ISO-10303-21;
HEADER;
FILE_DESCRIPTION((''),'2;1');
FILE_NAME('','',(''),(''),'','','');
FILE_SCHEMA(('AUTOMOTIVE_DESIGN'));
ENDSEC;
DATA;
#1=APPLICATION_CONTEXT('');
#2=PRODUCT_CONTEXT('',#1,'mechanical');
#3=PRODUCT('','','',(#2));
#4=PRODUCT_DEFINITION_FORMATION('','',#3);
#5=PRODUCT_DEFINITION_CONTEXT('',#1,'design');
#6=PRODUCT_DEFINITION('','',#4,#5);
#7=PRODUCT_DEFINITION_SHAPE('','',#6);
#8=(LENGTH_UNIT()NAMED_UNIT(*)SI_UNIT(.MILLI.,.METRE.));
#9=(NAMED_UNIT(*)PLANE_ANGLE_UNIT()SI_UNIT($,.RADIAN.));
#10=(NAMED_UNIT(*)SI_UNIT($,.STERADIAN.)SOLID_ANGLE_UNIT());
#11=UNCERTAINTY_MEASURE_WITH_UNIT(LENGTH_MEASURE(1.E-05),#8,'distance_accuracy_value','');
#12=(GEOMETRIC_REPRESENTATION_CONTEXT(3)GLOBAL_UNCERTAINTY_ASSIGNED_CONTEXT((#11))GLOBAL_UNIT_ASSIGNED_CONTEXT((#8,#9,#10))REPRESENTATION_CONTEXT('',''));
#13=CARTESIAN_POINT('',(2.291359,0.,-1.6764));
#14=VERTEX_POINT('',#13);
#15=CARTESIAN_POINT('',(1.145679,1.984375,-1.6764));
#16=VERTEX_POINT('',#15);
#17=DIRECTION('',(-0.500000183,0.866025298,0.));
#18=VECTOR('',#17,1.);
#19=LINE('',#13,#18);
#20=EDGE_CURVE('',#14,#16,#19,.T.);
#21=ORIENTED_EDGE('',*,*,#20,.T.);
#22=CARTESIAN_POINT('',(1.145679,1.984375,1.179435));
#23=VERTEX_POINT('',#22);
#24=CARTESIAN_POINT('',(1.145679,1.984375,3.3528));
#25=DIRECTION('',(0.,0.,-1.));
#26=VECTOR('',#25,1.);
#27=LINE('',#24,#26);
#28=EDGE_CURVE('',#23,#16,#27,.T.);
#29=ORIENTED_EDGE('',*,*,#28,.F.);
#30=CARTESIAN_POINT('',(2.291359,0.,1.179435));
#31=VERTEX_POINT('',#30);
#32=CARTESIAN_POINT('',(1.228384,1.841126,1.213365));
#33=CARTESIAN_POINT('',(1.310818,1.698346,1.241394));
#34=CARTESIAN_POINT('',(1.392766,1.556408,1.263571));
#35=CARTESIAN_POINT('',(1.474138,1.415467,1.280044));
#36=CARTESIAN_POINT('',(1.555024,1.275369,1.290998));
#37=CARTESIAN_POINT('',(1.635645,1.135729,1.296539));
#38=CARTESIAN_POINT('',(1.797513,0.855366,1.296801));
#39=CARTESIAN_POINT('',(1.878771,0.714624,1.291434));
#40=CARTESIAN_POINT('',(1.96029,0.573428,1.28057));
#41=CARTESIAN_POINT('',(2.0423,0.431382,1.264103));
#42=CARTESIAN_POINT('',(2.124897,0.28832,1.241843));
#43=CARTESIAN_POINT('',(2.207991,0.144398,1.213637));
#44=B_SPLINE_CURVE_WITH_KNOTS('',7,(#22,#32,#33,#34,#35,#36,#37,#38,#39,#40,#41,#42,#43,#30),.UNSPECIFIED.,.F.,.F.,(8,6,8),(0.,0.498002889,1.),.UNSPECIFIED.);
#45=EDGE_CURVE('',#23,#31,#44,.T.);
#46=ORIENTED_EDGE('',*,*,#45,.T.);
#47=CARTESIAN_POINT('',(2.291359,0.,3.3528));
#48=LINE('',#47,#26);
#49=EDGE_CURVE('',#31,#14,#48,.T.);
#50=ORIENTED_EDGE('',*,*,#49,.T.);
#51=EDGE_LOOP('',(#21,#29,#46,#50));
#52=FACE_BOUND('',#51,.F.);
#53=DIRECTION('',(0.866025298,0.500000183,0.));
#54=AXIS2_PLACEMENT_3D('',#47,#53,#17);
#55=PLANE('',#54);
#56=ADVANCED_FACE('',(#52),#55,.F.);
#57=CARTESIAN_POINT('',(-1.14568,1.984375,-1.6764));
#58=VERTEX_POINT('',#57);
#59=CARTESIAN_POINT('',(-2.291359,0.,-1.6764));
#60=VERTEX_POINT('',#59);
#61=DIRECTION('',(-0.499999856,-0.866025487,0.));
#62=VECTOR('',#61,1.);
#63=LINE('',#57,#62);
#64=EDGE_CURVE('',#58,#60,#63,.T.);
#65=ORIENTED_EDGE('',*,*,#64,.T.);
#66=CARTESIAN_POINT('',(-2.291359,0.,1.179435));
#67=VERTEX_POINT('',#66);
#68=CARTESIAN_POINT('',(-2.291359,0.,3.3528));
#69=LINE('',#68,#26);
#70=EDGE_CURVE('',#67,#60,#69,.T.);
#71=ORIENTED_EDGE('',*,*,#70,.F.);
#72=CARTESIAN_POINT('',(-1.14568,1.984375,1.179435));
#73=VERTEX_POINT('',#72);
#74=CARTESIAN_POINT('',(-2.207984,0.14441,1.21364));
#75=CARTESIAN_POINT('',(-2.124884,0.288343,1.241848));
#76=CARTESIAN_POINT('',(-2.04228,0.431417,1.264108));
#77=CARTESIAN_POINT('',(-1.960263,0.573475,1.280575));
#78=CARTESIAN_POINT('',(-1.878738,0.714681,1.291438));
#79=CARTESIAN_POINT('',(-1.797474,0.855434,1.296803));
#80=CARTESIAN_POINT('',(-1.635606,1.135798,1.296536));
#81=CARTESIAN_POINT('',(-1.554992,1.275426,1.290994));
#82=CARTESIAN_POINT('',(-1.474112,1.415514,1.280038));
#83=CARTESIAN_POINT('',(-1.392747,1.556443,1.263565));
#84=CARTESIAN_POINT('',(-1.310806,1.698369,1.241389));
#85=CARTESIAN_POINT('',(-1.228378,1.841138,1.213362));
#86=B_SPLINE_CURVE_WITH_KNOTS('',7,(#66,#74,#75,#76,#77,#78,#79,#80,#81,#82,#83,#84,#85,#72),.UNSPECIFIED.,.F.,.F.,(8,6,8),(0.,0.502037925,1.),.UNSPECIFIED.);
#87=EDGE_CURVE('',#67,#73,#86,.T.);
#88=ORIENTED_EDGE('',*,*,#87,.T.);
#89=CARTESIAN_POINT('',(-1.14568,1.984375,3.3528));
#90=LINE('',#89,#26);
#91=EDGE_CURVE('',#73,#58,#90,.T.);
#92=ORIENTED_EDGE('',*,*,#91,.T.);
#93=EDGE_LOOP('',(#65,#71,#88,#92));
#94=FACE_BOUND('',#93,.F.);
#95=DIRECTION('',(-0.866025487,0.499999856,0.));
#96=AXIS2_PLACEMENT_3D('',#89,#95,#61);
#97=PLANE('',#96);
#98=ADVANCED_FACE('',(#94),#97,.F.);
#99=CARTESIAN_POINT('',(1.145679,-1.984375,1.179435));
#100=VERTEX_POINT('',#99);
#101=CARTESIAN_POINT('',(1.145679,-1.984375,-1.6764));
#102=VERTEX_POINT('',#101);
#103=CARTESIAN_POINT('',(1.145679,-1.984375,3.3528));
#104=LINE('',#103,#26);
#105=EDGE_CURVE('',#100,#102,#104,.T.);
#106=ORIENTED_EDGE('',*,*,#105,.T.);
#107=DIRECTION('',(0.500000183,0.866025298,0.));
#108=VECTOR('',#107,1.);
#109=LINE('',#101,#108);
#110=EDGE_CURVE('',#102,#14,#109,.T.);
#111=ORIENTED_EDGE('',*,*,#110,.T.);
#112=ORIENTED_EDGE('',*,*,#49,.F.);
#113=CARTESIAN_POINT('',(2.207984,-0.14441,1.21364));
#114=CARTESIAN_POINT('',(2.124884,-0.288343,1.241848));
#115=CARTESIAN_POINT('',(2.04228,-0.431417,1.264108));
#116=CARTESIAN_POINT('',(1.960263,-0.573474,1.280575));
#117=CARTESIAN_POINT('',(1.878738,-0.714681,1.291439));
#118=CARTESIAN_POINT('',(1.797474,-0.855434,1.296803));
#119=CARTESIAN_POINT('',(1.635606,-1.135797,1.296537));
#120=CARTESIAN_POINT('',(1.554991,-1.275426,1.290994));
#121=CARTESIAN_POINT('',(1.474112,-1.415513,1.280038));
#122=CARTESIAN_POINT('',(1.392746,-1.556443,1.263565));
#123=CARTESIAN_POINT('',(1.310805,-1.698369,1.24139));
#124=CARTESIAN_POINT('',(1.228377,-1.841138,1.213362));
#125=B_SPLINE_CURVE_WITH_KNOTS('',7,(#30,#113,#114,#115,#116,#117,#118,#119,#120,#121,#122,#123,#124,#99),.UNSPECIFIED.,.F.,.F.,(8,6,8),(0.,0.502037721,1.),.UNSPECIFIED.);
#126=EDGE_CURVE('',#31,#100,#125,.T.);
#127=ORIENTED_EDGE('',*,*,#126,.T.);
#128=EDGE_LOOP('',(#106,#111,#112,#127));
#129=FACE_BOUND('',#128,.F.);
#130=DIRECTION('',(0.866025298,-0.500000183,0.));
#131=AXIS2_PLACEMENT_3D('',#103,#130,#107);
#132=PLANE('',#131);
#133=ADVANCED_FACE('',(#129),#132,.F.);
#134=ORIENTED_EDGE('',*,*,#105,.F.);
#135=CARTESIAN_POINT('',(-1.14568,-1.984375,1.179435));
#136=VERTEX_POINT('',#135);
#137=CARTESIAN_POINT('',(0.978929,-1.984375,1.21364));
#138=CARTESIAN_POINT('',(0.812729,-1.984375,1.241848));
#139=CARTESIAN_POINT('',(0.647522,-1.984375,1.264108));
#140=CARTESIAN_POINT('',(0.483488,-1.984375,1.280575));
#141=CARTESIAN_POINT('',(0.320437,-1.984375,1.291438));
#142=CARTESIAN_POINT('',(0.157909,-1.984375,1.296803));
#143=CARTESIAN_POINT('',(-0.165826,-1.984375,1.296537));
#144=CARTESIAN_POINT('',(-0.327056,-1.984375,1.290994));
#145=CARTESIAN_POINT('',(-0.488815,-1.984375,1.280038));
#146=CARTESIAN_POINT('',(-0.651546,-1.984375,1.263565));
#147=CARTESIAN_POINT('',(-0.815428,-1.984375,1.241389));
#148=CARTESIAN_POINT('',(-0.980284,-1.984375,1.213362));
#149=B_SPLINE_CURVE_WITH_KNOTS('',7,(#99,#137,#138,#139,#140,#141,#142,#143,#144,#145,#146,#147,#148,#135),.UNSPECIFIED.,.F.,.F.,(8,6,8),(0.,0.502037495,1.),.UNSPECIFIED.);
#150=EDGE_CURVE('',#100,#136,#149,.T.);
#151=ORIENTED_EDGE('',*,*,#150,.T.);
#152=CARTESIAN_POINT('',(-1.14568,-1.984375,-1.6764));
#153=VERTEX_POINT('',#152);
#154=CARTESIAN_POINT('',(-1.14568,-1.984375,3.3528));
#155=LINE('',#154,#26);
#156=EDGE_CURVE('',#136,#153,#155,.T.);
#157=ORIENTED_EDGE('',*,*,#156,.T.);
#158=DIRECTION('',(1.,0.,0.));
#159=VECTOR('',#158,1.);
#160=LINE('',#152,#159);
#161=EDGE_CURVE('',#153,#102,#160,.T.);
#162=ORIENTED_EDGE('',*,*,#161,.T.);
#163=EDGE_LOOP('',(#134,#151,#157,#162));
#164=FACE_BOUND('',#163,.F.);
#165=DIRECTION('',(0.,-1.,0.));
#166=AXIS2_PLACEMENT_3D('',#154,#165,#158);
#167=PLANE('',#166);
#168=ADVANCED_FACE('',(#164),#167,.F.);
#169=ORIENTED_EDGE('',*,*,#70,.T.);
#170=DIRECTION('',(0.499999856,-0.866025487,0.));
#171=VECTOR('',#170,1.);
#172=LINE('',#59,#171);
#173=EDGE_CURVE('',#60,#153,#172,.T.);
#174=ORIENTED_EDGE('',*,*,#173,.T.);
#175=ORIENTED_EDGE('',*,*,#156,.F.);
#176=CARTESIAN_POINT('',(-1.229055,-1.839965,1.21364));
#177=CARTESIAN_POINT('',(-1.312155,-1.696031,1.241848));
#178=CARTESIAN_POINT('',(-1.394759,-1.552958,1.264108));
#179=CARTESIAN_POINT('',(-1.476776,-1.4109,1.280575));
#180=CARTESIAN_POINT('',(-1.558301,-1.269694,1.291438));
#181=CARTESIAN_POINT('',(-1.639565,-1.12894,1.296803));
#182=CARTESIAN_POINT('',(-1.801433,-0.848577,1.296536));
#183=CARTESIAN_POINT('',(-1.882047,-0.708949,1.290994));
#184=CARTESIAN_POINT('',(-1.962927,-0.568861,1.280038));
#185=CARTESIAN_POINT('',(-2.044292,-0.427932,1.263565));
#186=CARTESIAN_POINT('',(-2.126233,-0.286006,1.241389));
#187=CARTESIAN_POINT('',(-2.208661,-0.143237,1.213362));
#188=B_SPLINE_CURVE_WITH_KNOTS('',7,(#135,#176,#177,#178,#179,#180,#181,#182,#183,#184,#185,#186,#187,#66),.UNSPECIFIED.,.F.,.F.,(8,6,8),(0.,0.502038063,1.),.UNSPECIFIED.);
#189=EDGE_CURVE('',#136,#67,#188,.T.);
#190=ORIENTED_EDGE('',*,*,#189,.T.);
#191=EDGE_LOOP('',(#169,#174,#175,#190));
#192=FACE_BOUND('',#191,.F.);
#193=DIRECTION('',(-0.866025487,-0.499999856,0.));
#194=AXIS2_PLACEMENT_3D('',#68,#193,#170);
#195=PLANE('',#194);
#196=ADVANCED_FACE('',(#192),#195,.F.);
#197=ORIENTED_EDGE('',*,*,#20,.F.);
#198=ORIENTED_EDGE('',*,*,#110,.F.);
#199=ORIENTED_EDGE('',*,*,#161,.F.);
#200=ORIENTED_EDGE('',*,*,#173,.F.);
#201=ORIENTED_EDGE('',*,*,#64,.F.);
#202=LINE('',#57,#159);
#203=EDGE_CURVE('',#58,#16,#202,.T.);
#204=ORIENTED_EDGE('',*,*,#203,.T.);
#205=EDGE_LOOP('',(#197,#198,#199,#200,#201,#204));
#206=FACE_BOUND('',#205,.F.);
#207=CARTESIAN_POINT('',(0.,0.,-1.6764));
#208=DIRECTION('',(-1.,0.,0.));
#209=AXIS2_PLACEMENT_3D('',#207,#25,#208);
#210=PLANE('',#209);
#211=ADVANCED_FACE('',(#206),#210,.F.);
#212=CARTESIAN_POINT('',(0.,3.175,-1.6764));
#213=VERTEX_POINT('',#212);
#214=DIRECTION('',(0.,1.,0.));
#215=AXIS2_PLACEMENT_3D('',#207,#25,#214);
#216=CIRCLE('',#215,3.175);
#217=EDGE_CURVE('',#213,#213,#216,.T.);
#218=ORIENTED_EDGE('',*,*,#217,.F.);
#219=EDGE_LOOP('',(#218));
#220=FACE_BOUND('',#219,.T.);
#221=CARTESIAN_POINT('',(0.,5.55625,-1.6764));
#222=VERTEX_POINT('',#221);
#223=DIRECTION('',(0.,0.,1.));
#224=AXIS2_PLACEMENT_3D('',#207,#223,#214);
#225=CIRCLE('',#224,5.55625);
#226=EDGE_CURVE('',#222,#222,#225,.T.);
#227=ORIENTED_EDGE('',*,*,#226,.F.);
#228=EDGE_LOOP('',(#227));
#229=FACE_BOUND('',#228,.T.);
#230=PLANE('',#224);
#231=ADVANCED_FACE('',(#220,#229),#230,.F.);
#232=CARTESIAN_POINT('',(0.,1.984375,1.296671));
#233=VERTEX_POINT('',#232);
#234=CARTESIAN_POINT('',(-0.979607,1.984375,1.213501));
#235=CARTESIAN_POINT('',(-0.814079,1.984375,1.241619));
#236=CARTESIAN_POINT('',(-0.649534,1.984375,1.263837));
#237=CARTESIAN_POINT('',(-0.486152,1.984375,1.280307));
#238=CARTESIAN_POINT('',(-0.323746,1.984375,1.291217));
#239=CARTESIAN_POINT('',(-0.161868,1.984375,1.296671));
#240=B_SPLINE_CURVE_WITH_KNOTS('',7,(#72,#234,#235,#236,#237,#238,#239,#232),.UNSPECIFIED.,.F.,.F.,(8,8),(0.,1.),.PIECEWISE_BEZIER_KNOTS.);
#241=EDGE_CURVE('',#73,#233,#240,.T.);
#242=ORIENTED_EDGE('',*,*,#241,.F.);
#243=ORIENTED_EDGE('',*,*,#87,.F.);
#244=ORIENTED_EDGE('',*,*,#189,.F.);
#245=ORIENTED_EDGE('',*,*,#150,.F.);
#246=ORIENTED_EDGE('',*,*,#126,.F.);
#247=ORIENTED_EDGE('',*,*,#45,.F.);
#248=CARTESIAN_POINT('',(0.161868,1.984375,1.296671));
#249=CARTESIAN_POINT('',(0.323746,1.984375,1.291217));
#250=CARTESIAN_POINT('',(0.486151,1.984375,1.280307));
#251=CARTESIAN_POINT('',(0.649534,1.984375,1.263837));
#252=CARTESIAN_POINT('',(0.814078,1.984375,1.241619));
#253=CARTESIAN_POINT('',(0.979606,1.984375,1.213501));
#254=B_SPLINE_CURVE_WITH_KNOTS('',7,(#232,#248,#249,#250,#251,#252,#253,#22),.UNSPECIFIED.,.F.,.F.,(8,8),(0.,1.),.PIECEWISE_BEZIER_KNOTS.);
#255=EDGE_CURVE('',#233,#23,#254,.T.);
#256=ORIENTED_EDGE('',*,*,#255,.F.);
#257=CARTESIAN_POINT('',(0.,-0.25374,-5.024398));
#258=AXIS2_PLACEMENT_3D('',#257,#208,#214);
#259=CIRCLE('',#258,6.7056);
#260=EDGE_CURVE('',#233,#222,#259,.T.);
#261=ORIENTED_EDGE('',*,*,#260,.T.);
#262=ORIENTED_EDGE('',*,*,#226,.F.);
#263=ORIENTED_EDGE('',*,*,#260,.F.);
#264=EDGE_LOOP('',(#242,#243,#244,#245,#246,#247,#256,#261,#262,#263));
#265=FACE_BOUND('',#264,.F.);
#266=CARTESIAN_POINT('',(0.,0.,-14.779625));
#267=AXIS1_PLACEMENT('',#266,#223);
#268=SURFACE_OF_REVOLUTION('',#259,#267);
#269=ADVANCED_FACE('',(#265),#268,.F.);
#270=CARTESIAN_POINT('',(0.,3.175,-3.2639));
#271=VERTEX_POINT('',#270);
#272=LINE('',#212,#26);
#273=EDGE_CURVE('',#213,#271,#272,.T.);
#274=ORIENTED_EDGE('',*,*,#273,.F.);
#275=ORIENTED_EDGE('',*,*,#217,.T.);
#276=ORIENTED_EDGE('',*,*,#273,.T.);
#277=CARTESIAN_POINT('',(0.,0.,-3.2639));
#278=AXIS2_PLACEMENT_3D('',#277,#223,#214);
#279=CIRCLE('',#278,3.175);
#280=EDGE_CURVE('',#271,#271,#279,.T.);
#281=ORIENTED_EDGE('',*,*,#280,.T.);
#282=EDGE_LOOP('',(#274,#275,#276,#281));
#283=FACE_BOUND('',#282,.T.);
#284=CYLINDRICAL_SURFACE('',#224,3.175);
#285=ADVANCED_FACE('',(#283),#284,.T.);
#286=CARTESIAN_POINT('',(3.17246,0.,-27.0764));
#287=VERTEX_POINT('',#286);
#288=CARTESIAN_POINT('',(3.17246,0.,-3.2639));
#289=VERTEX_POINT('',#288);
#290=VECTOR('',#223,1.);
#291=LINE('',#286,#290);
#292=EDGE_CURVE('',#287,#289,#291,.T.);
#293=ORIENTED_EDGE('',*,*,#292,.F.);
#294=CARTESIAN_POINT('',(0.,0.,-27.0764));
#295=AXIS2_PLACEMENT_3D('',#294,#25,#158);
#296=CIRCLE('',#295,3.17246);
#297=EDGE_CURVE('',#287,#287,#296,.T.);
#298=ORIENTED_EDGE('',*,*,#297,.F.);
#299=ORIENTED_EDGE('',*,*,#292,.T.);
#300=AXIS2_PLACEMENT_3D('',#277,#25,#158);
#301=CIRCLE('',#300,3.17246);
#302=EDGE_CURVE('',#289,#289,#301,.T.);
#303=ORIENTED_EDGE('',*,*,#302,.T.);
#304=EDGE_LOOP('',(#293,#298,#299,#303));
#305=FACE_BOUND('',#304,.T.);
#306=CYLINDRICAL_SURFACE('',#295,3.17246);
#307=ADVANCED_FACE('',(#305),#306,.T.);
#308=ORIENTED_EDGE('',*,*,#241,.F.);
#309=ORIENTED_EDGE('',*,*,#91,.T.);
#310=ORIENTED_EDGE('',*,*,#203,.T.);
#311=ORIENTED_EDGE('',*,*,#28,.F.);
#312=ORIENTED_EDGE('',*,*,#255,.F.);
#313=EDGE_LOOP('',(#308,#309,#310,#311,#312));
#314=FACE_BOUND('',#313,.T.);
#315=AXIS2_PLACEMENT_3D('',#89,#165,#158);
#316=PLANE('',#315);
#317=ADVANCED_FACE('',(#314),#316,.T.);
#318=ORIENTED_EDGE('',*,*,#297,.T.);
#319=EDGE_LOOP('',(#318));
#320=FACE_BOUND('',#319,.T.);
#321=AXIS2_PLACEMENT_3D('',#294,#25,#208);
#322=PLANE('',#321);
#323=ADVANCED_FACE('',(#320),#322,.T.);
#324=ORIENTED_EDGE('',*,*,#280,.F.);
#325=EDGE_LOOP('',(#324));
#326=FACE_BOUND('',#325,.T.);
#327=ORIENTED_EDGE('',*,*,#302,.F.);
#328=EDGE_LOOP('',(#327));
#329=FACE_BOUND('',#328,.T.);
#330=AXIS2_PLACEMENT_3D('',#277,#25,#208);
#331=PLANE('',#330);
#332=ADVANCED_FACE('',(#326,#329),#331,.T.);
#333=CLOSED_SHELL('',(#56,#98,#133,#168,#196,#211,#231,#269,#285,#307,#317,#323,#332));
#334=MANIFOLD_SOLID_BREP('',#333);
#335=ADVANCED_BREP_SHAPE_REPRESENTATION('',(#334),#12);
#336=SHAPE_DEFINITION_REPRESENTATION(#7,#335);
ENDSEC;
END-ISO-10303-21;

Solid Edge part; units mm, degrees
sketch "Sketch1" plane through (0, 0, 0) normal (1, 0, 0) x (0, 1, 0)
  line L0 (0, -1.6764) -> (0, 1.6764)
  arc A0 (0, 1.6764) -> (5.55625, -1.6764) centre (-0.25374, -5.024398) cw
  line L1 (0, -1.6764) -> (5.55625, -1.6764)
  dimension "D1" = 3.3528
  dimension "D2" = 6.7056
revolve "RevolvedProtrusion1" add sketch "Sketch1" angle 360 about axis through (0, 0, -14.779625) along (0, 0, 1)
sketch "Sketch2" plane through (0, 0, -1.6764) normal (0, 0, -1) x (0, 1, 0)
  circle A0 centre (0, 0) radius 3.175
  dimension "D1" = 6.35
extrude "Protrusion1" add sketch "Sketch2" along normal blind 25.4
sketch "Sketch3" plane through (0, 0, -27.0764) normal (0, 0, -1) x (1, 0, 0)
  circle A0 centre (0, 0) radius 3.17246
  dimension "D1" = 0.0025
extrude "Cutout1" cut sketch "Sketch3" against normal blind 23.8125 flip side to cut
sketch "Sketch4" plane through (-0.603226, 0.360624, 3.3528) normal (0, 0, 1) x (1, 0, 0)
  line L0 (-0.542454, 1.623751) -> (1.748905, 1.623751)
  line L1 (2.894585, -0.360624) -> (1.748905, 1.623751)
  line L2 (1.748905, -2.344999) -> (2.894585, -0.360624)
  line L3 (-0.542454, -2.344999) -> (1.748905, -2.344999)
  line L4 (-1.688133, -0.360624) -> (-0.542454, -2.344999)
  line L5 (-0.542454, 1.623751) -> (-1.688133, -0.360624)
extrude "ExtrudedCutout_11" cut sketch "Sketch4" against normal blind 5.0292
properties part number "24101086"
